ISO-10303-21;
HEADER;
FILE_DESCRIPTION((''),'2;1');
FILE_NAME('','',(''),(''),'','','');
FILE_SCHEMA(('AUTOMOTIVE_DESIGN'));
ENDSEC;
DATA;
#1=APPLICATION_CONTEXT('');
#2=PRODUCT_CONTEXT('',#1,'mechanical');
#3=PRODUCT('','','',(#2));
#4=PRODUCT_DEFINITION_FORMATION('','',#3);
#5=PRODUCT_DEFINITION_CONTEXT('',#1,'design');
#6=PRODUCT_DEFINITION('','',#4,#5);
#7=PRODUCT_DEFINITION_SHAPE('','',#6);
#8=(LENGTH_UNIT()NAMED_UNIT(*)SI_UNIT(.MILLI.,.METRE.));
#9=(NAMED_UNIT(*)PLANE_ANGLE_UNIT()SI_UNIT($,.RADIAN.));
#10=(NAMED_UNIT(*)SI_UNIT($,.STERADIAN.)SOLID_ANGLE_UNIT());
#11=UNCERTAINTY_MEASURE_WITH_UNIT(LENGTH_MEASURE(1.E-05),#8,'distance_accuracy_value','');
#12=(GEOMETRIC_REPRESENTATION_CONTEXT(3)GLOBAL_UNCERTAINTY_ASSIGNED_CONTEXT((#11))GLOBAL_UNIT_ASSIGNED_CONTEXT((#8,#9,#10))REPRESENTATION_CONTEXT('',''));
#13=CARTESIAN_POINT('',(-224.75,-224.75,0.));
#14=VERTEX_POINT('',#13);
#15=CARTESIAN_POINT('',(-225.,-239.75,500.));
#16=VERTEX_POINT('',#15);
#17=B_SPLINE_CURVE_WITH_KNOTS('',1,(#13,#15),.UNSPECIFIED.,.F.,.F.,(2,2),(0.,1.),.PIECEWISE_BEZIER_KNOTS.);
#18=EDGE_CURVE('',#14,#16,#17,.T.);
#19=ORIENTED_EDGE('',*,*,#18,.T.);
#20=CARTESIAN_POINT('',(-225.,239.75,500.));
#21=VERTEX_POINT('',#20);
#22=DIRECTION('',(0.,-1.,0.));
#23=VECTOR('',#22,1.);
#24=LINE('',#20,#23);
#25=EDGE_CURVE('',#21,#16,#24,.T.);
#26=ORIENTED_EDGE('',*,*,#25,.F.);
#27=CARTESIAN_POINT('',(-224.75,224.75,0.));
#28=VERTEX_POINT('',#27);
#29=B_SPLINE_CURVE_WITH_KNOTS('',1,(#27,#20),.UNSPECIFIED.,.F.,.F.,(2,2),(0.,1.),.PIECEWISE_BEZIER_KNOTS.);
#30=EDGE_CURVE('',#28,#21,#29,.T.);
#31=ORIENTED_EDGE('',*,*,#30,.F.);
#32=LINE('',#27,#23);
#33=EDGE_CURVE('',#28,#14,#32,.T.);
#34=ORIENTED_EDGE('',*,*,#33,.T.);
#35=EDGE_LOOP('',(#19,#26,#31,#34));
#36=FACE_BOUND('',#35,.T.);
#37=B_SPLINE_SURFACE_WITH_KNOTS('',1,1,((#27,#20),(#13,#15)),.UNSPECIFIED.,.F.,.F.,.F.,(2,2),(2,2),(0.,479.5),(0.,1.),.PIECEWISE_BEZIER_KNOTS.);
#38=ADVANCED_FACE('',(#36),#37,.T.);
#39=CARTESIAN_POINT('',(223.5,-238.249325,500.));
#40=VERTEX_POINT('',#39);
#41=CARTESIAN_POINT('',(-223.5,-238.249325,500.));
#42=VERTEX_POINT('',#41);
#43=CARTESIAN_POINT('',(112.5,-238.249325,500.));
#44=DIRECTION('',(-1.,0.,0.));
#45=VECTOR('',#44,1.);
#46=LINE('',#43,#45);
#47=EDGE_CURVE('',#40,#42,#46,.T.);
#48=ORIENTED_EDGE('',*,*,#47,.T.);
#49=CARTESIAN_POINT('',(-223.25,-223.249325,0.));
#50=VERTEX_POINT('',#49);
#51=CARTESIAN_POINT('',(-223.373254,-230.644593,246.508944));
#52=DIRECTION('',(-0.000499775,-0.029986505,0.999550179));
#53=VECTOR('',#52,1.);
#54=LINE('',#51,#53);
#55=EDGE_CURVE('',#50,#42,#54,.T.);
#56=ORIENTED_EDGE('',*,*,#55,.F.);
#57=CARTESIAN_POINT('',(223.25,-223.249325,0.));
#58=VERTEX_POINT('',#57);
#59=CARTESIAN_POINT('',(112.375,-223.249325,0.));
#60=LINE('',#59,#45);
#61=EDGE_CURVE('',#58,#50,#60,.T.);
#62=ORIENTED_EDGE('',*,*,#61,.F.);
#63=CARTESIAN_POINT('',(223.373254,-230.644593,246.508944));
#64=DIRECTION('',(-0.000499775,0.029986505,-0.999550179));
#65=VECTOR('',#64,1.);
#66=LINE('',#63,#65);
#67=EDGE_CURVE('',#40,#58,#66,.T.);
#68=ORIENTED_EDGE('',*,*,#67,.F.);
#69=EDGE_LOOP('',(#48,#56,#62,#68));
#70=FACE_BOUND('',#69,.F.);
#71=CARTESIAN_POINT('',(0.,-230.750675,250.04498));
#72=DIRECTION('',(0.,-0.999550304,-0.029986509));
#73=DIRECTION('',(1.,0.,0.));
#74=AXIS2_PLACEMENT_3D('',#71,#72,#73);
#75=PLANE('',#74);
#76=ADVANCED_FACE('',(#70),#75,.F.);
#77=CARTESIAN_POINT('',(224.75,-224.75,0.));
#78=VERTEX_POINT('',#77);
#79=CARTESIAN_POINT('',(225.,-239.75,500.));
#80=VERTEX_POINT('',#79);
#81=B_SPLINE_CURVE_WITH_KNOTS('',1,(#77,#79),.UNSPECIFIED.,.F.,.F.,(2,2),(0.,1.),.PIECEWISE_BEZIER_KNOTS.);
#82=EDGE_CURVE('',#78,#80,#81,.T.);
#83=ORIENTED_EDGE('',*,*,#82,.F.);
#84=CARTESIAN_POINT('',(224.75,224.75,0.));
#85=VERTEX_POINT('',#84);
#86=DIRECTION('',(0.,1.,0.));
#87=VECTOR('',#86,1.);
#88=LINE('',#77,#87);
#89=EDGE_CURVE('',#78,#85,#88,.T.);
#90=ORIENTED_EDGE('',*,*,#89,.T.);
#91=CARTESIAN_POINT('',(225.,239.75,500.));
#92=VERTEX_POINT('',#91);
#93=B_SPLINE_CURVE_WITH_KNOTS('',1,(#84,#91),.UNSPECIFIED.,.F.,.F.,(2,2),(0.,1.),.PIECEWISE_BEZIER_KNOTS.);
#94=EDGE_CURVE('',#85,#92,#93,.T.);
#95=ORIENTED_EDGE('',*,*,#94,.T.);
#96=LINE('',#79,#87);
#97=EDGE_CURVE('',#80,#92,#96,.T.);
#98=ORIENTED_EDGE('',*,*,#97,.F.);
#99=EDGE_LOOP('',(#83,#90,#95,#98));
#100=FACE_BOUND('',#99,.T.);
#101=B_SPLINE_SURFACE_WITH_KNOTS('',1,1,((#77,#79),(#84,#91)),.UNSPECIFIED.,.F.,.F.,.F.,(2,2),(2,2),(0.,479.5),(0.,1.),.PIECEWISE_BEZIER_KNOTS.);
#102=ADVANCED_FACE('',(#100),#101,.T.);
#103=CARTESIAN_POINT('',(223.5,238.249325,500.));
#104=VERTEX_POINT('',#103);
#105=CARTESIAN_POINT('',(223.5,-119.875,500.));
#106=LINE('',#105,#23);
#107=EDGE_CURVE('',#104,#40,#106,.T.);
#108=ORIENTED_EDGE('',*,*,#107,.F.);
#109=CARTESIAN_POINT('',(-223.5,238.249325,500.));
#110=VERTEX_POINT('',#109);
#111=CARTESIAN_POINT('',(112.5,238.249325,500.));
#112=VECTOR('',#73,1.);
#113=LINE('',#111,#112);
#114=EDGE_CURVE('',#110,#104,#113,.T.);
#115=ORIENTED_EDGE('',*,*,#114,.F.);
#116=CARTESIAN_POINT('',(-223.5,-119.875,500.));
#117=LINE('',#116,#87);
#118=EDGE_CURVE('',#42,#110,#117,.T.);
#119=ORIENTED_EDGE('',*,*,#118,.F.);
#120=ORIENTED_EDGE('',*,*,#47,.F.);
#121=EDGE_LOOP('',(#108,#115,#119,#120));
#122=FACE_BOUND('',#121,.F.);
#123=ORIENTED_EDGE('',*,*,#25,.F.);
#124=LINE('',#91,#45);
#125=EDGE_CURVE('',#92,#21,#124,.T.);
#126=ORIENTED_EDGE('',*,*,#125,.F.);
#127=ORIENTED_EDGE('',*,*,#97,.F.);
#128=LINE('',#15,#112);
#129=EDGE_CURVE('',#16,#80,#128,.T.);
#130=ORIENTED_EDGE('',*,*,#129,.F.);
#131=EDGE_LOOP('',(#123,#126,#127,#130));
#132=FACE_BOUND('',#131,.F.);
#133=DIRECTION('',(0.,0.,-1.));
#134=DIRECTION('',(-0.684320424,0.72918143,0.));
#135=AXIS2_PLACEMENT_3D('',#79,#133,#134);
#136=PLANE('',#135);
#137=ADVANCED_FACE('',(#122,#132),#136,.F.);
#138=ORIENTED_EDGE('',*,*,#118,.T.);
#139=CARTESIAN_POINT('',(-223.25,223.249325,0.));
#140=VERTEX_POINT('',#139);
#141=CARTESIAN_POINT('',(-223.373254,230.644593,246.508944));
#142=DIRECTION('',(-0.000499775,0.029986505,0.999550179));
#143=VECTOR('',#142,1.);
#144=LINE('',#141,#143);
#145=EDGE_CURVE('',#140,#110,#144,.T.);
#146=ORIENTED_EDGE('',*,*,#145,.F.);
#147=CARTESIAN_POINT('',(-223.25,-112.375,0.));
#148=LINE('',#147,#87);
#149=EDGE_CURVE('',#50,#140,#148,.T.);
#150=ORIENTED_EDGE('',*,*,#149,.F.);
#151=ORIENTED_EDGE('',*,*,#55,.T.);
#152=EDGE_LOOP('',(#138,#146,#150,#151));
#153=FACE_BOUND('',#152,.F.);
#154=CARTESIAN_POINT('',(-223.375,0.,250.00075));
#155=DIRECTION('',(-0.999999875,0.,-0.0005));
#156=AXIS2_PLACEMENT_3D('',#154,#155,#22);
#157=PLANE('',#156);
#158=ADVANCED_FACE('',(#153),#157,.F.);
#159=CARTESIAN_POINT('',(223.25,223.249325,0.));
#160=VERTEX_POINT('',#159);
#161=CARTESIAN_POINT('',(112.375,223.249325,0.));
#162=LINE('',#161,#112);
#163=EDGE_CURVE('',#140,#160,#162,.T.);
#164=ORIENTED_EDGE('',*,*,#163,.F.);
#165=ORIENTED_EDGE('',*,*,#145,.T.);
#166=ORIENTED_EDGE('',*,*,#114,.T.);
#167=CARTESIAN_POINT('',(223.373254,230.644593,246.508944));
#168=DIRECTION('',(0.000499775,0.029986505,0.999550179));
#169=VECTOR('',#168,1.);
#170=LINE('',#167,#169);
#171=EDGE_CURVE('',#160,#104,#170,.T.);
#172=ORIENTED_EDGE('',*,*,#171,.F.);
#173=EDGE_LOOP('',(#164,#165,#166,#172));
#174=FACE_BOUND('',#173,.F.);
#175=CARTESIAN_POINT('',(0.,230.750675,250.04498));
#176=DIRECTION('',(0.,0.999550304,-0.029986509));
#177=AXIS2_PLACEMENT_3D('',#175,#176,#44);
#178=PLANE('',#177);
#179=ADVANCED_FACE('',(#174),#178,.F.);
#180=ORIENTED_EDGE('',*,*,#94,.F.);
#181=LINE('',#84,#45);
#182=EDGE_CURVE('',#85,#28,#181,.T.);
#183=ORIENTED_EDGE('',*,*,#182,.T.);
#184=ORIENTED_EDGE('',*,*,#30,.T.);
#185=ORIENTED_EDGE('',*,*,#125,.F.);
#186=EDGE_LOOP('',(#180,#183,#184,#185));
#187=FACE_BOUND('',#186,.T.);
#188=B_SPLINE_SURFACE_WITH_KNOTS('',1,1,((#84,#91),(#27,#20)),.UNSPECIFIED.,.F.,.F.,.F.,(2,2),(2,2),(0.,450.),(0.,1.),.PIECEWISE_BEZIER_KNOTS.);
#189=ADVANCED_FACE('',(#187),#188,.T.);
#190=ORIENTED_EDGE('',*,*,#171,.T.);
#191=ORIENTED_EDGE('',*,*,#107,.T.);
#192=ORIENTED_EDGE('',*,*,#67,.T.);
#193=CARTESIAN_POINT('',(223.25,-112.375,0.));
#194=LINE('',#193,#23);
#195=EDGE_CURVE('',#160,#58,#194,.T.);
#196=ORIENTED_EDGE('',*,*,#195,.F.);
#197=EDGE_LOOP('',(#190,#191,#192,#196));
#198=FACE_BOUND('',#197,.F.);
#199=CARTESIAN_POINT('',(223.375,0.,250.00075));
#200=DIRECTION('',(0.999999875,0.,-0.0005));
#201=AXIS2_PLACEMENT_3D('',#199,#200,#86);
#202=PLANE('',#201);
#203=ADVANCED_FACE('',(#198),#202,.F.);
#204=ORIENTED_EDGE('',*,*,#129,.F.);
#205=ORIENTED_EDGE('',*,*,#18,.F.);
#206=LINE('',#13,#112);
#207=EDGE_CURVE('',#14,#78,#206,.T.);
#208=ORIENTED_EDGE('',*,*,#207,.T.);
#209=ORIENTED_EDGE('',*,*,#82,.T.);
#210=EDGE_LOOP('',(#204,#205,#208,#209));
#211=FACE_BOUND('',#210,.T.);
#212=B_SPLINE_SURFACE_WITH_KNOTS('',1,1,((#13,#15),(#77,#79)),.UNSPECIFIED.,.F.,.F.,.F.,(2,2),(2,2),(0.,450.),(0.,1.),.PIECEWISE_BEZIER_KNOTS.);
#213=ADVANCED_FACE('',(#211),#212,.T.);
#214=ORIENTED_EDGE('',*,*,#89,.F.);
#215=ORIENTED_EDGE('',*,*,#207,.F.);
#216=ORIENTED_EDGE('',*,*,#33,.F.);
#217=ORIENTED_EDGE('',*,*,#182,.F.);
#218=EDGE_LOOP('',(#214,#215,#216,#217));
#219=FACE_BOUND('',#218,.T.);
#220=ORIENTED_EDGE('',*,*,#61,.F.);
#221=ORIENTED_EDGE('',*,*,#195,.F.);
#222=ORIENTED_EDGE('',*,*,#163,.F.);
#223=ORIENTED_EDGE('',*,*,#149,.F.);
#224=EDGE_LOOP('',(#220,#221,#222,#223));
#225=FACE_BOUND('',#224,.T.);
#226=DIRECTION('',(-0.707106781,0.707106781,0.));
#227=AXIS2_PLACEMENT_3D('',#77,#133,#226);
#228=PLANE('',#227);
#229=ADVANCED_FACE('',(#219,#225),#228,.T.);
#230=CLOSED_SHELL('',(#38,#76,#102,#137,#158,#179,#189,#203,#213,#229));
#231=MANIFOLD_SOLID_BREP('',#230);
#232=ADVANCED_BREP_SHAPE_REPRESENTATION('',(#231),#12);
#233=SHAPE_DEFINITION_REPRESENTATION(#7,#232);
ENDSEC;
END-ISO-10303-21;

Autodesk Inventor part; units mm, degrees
ref_plane "YZ Plane" through (0, 0, 0) normal (1, 0, 0) x (0, 1, 0)
ref_plane "XZ Plane" through (0, 0, 0) normal (0, 1, 0) x (-1, 0, 0)
sketch "Sketch1" plane through (0, 0, 0) normal (0, 0, 1) x (1, 0, 0)
  line L0 (-223.25, 223.25) -> (223.25, 223.25)
  line L1 (-223.25, -223.25) -> (-223.25, 223.25)
  line L2 (223.25, 223.25) -> (223.25, -223.25)
  line L3 (223.25, -223.25) -> (-223.25, -223.25)
  line L4 (224.75, 224.75) -> (-224.75, 224.75)
  line L5 (-224.75, 224.75) -> (-224.75, -224.75)
  line L6 (-224.75, -224.75) -> (224.75, -224.75)
  line L7 (224.75, -224.75) -> (224.75, 224.75)
  point P0 (0, 0)
  point P1 (0, 0)
  dimension "d0" = 1.5
ref_plane "Work Plane1" through (0, 0, 500) normal (0, 0, 1) x (1, 0, 0)
sketch "Sketch2" plane through (0, 0, 500) normal (0, 0, 1) x (1, 0, 0)
  line L0 (-223.5, 238.25) -> (223.5, 238.25)
  line L1 (-223.5, -238.25) -> (-223.5, 238.25)
  line L2 (223.5, 238.25) -> (223.5, -238.25)
  line L3 (223.5, -238.25) -> (-223.5, -238.25)
  line L4 (225, 239.75) -> (-225, 239.75)
  line L5 (-225, 239.75) -> (-225, -239.75)
  line L6 (-225, -239.75) -> (225, -239.75)
  line L7 (225, -239.75) -> (225, 239.75)
  point P0 (0, 0)
  point P1 (0, 0)
  dimension "d2" = 1.5
loft "Loft1" add profiles "Sketch1", "Sketch2" contours L0 L2 L3 L1 | L7 L6 L5 L4 / L0 L2 L3 L1 | L7 L6 L5 L4
shell "Shell1" thickness 1.5 removed faces 2 at (-75, -79.9167, 500) at (74.9167, -74.9167, 0)
properties part number "Test Section Ver2"
